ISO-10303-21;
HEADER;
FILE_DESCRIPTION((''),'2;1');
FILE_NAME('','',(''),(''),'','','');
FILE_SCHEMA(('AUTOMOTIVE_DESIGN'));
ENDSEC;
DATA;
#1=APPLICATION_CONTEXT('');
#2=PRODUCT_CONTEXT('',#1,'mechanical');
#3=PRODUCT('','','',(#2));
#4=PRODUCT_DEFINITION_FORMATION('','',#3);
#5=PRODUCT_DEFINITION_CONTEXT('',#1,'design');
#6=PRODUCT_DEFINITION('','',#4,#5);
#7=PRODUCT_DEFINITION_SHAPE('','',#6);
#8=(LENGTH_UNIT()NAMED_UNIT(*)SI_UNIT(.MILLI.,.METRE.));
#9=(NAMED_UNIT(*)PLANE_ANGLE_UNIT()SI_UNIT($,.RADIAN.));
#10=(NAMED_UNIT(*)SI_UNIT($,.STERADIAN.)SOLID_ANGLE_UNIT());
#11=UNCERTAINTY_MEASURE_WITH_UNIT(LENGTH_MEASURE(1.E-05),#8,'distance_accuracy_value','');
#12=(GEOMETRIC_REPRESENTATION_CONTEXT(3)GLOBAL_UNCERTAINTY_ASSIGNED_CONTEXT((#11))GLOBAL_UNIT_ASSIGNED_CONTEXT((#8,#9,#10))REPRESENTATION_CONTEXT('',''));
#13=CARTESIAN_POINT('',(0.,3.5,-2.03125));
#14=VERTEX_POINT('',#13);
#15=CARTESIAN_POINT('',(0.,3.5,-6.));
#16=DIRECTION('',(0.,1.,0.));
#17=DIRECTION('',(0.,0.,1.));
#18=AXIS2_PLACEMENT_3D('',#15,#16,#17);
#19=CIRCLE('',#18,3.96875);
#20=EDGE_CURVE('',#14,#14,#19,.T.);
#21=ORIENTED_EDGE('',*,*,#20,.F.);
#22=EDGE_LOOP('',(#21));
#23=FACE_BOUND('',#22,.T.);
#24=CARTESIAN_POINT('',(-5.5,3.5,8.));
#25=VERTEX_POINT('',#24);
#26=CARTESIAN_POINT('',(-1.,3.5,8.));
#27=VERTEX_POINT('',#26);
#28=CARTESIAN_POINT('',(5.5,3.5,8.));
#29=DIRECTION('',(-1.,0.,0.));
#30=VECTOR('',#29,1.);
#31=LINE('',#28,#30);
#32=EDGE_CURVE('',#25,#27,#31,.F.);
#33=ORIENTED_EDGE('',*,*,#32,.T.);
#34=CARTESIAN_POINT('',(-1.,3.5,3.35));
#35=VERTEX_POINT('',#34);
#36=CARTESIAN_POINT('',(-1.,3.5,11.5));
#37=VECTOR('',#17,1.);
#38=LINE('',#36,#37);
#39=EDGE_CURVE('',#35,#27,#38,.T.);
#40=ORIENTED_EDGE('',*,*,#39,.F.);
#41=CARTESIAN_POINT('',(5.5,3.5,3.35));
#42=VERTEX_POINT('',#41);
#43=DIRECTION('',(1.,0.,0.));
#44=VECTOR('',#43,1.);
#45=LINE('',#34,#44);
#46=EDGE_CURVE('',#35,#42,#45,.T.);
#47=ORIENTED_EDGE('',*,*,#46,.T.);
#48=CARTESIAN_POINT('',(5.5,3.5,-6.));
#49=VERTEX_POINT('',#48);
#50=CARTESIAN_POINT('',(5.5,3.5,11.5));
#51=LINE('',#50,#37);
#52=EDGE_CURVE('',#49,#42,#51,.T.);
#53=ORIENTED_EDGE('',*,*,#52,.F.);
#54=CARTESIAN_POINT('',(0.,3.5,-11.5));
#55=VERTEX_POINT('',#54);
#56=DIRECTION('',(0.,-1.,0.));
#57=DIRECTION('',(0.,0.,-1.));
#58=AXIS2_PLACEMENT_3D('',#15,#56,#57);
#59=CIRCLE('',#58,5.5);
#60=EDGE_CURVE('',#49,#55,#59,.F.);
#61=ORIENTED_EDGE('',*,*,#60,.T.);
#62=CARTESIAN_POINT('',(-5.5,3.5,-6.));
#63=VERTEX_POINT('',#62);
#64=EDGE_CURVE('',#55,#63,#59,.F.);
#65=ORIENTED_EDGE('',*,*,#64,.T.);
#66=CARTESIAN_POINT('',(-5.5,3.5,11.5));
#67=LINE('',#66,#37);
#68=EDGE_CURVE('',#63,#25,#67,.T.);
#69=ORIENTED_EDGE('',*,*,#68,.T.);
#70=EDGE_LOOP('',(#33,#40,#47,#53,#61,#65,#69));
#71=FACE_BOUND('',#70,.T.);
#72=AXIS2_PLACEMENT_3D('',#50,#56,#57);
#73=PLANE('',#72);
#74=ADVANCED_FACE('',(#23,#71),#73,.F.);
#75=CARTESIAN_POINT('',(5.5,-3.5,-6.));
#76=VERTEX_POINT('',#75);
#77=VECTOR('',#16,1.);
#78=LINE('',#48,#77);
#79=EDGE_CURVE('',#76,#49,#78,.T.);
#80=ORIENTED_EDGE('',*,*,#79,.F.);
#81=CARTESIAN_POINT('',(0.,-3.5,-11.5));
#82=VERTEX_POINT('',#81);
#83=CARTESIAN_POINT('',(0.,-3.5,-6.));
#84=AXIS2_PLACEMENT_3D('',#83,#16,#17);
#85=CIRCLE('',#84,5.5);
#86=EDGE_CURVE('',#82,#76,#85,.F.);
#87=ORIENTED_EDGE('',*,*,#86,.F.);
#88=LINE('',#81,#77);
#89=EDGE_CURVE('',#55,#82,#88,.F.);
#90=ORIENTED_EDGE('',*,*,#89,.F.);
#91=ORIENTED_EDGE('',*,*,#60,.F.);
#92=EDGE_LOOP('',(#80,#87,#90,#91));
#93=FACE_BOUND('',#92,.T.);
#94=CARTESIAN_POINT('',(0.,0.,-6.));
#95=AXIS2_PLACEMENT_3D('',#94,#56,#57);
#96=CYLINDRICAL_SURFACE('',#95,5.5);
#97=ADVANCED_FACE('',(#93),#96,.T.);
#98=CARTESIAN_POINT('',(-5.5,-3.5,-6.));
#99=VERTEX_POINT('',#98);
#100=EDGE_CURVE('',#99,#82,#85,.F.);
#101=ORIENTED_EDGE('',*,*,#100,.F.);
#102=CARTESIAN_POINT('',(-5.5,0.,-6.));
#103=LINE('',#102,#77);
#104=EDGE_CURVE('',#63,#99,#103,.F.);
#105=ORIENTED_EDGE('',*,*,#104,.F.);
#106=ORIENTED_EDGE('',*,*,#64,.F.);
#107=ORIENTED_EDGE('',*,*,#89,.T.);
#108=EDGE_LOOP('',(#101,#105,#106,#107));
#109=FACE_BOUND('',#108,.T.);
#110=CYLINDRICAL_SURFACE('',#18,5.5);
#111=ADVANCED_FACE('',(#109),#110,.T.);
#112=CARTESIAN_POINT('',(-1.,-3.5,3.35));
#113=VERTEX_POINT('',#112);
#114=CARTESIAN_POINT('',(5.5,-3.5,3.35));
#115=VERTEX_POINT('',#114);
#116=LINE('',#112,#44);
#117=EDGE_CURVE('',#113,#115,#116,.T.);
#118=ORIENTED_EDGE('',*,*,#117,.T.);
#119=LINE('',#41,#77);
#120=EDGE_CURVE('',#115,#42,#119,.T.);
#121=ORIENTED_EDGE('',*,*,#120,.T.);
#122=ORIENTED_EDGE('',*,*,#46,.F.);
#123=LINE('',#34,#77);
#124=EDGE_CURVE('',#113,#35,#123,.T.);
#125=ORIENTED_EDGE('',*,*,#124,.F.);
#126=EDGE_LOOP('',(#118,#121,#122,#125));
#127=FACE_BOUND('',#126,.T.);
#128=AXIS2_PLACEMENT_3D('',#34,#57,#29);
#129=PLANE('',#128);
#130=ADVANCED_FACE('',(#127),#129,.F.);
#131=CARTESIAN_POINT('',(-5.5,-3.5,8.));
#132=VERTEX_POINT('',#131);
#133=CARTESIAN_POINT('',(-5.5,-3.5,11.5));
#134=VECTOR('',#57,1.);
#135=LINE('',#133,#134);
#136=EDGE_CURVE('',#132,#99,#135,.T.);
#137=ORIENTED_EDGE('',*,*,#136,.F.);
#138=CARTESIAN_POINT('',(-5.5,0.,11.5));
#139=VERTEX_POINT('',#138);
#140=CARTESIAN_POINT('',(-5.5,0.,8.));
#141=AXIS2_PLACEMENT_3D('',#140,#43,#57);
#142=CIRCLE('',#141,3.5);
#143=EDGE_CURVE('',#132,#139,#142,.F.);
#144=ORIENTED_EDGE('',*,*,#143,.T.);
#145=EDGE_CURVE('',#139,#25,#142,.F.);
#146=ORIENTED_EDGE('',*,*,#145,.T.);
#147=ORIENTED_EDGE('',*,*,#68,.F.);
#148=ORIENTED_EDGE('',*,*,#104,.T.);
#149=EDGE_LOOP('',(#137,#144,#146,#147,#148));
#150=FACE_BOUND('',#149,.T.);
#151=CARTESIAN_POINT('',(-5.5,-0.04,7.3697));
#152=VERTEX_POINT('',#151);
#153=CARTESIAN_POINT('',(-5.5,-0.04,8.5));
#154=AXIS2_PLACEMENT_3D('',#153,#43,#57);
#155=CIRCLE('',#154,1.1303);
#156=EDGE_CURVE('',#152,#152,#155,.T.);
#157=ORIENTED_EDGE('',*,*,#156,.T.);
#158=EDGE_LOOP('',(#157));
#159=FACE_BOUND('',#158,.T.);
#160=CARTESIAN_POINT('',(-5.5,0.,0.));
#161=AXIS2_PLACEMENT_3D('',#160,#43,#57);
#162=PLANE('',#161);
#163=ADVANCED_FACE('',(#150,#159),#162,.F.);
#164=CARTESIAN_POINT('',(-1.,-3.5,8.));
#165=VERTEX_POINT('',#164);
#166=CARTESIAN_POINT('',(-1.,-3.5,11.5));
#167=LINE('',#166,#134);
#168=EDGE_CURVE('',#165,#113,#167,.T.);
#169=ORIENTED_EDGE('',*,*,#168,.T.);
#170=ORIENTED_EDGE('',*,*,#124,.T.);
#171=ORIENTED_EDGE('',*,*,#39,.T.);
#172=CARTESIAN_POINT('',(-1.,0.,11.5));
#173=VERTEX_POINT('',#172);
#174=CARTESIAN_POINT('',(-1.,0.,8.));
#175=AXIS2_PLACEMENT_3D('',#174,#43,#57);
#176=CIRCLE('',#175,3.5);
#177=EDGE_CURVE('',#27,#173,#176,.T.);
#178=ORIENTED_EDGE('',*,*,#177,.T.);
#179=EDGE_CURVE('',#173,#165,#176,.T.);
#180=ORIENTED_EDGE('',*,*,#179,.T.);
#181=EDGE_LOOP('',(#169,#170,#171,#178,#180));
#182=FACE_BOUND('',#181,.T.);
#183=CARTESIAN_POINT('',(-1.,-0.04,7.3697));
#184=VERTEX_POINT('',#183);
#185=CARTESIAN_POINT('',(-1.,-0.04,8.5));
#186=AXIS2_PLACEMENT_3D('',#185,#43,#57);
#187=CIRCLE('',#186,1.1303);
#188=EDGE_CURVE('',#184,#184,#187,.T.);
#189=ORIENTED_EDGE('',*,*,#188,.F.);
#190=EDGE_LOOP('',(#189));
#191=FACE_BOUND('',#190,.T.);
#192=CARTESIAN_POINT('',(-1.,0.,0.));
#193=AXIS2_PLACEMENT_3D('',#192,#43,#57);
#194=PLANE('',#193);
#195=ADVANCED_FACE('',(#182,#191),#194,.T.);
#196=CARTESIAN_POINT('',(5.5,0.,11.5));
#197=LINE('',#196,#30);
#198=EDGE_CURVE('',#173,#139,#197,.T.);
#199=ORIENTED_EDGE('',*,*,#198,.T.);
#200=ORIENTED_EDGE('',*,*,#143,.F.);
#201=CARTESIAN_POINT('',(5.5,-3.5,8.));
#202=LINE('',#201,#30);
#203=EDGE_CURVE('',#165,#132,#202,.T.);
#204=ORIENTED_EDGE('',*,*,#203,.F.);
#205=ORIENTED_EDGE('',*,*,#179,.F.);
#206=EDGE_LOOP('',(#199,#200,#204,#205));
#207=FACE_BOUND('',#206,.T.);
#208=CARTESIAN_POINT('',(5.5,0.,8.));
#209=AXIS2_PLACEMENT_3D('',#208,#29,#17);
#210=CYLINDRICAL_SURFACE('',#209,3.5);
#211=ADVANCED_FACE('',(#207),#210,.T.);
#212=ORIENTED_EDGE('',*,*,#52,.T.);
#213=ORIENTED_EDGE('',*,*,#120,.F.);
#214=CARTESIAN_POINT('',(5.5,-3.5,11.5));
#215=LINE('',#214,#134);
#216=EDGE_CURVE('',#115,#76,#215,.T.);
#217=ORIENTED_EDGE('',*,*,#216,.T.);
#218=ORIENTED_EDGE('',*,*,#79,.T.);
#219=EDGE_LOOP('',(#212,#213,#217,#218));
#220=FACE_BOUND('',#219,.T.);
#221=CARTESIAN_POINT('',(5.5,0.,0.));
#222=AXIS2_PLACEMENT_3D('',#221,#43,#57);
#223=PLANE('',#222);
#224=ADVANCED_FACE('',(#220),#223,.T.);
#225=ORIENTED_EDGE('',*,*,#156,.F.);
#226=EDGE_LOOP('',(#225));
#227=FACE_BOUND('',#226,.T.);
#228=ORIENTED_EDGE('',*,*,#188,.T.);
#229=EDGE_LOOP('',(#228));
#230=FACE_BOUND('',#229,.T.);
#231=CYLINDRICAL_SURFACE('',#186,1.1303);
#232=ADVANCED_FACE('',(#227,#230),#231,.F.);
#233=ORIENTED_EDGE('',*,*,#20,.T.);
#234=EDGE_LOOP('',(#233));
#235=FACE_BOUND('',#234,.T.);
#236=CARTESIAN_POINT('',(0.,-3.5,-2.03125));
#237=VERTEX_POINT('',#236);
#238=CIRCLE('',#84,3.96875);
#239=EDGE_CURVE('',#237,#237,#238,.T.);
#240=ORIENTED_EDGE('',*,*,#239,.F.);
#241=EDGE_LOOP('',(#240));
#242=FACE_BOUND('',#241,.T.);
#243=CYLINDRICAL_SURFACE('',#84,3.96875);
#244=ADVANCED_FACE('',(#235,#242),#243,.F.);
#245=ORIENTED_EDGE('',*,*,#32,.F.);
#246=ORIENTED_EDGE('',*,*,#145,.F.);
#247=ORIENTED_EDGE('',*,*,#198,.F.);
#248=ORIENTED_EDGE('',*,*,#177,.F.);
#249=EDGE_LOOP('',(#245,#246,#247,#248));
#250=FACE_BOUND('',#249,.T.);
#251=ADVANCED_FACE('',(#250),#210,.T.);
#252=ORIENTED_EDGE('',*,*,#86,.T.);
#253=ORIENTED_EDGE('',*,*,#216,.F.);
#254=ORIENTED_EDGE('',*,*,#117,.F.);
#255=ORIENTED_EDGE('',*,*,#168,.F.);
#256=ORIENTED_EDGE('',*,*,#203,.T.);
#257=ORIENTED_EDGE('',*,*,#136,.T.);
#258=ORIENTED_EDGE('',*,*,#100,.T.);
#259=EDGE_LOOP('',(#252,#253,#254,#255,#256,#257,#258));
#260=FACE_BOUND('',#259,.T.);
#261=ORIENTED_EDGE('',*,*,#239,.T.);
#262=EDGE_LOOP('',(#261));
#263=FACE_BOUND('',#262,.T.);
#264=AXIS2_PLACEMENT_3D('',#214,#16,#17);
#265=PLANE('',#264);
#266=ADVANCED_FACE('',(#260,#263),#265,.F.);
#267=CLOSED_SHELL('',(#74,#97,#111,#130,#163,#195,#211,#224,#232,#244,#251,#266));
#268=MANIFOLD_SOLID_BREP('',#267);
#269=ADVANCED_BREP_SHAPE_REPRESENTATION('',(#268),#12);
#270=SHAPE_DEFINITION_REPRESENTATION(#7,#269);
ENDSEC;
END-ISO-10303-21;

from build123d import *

# Parameters (mm, degrees)
SKETCH1_W             = 23
SKETCH1_H             = 7
BOSS_EXTRUDE1_DEPTH   = 5.5
SKETCH2_R             = 3.96875
CUT_EXTRUDE1_DEPTH    = 15.543039572
SKETCH3_W             = 8.15
SKETCH3_H             = 7
CUT_EXTRUDE2_DEPTH    = 6.5
F_4_40_TAPPED_HOLE1_D = 2.2606
FILLET1_R             = 3.5
FILLET2_R             = 5.5


with BuildPart() as part:
    # Sketch1 → Boss-Extrude1 (new, symmetric)
    with BuildSketch(Plane(origin=(0, 0, 0), x_dir=(0, 0, -1), z_dir=(1, 0, 0))):
        Rectangle(SKETCH1_W, SKETCH1_H)
    extrude(amount=BOSS_EXTRUDE1_DEPTH, both=True)

    # Sketch2 → Cut-Extrude1 (cut, through all)
    with BuildSketch(Plane(origin=(0, 3.5, 0), x_dir=(1, 0, 0), z_dir=(0, 1, 0))):
        with Locations(Location((0, 6, 0), (0, 0, 270))):
            Circle(SKETCH2_R)
    extrude(amount=-CUT_EXTRUDE1_DEPTH, mode=Mode.SUBTRACT)

    # Sketch3 → Cut-Extrude2 (cut)
    with BuildSketch(Plane(origin=(5.5, 0, 0), x_dir=(0, 0, -1), z_dir=(1, 0, 0))):
        with Locations((-7.425, 0)):
            Rectangle(SKETCH3_W, SKETCH3_H)
    extrude(amount=-CUT_EXTRUDE2_DEPTH, mode=Mode.SUBTRACT)

    # #4-40 Tapped Hole1 (through all)
    with Locations(Plane(origin=(-1, 0, 0), x_dir=(0, 0, -1), z_dir=(1, 0, 0))):
        with Locations((-8.5, -0.04)):
            Hole(F_4_40_TAPPED_HOLE1_D / 2)

    # Fillet1
    fillet1_edges = [part.edges().sort_by_distance(p)[0] for p in [
        (-3.25, -3.5, 11.5),
        (-3.25, 3.5, 11.5),
    ]]
    fillet(fillet1_edges, radius=FILLET1_R - 0.0001)  # a hair under: the kernel refuses the full size

    # Fillet2
    fillet2_edges = [part.edges().sort_by_distance(p)[0] for p in [
        (-5.5, 0, -11.5),
        (5.5, 0, -11.5),
    ]]
    fillet(fillet2_edges, radius=FILLET2_R - 0.0001)  # a hair under: the kernel refuses the full size


solid = part.part
